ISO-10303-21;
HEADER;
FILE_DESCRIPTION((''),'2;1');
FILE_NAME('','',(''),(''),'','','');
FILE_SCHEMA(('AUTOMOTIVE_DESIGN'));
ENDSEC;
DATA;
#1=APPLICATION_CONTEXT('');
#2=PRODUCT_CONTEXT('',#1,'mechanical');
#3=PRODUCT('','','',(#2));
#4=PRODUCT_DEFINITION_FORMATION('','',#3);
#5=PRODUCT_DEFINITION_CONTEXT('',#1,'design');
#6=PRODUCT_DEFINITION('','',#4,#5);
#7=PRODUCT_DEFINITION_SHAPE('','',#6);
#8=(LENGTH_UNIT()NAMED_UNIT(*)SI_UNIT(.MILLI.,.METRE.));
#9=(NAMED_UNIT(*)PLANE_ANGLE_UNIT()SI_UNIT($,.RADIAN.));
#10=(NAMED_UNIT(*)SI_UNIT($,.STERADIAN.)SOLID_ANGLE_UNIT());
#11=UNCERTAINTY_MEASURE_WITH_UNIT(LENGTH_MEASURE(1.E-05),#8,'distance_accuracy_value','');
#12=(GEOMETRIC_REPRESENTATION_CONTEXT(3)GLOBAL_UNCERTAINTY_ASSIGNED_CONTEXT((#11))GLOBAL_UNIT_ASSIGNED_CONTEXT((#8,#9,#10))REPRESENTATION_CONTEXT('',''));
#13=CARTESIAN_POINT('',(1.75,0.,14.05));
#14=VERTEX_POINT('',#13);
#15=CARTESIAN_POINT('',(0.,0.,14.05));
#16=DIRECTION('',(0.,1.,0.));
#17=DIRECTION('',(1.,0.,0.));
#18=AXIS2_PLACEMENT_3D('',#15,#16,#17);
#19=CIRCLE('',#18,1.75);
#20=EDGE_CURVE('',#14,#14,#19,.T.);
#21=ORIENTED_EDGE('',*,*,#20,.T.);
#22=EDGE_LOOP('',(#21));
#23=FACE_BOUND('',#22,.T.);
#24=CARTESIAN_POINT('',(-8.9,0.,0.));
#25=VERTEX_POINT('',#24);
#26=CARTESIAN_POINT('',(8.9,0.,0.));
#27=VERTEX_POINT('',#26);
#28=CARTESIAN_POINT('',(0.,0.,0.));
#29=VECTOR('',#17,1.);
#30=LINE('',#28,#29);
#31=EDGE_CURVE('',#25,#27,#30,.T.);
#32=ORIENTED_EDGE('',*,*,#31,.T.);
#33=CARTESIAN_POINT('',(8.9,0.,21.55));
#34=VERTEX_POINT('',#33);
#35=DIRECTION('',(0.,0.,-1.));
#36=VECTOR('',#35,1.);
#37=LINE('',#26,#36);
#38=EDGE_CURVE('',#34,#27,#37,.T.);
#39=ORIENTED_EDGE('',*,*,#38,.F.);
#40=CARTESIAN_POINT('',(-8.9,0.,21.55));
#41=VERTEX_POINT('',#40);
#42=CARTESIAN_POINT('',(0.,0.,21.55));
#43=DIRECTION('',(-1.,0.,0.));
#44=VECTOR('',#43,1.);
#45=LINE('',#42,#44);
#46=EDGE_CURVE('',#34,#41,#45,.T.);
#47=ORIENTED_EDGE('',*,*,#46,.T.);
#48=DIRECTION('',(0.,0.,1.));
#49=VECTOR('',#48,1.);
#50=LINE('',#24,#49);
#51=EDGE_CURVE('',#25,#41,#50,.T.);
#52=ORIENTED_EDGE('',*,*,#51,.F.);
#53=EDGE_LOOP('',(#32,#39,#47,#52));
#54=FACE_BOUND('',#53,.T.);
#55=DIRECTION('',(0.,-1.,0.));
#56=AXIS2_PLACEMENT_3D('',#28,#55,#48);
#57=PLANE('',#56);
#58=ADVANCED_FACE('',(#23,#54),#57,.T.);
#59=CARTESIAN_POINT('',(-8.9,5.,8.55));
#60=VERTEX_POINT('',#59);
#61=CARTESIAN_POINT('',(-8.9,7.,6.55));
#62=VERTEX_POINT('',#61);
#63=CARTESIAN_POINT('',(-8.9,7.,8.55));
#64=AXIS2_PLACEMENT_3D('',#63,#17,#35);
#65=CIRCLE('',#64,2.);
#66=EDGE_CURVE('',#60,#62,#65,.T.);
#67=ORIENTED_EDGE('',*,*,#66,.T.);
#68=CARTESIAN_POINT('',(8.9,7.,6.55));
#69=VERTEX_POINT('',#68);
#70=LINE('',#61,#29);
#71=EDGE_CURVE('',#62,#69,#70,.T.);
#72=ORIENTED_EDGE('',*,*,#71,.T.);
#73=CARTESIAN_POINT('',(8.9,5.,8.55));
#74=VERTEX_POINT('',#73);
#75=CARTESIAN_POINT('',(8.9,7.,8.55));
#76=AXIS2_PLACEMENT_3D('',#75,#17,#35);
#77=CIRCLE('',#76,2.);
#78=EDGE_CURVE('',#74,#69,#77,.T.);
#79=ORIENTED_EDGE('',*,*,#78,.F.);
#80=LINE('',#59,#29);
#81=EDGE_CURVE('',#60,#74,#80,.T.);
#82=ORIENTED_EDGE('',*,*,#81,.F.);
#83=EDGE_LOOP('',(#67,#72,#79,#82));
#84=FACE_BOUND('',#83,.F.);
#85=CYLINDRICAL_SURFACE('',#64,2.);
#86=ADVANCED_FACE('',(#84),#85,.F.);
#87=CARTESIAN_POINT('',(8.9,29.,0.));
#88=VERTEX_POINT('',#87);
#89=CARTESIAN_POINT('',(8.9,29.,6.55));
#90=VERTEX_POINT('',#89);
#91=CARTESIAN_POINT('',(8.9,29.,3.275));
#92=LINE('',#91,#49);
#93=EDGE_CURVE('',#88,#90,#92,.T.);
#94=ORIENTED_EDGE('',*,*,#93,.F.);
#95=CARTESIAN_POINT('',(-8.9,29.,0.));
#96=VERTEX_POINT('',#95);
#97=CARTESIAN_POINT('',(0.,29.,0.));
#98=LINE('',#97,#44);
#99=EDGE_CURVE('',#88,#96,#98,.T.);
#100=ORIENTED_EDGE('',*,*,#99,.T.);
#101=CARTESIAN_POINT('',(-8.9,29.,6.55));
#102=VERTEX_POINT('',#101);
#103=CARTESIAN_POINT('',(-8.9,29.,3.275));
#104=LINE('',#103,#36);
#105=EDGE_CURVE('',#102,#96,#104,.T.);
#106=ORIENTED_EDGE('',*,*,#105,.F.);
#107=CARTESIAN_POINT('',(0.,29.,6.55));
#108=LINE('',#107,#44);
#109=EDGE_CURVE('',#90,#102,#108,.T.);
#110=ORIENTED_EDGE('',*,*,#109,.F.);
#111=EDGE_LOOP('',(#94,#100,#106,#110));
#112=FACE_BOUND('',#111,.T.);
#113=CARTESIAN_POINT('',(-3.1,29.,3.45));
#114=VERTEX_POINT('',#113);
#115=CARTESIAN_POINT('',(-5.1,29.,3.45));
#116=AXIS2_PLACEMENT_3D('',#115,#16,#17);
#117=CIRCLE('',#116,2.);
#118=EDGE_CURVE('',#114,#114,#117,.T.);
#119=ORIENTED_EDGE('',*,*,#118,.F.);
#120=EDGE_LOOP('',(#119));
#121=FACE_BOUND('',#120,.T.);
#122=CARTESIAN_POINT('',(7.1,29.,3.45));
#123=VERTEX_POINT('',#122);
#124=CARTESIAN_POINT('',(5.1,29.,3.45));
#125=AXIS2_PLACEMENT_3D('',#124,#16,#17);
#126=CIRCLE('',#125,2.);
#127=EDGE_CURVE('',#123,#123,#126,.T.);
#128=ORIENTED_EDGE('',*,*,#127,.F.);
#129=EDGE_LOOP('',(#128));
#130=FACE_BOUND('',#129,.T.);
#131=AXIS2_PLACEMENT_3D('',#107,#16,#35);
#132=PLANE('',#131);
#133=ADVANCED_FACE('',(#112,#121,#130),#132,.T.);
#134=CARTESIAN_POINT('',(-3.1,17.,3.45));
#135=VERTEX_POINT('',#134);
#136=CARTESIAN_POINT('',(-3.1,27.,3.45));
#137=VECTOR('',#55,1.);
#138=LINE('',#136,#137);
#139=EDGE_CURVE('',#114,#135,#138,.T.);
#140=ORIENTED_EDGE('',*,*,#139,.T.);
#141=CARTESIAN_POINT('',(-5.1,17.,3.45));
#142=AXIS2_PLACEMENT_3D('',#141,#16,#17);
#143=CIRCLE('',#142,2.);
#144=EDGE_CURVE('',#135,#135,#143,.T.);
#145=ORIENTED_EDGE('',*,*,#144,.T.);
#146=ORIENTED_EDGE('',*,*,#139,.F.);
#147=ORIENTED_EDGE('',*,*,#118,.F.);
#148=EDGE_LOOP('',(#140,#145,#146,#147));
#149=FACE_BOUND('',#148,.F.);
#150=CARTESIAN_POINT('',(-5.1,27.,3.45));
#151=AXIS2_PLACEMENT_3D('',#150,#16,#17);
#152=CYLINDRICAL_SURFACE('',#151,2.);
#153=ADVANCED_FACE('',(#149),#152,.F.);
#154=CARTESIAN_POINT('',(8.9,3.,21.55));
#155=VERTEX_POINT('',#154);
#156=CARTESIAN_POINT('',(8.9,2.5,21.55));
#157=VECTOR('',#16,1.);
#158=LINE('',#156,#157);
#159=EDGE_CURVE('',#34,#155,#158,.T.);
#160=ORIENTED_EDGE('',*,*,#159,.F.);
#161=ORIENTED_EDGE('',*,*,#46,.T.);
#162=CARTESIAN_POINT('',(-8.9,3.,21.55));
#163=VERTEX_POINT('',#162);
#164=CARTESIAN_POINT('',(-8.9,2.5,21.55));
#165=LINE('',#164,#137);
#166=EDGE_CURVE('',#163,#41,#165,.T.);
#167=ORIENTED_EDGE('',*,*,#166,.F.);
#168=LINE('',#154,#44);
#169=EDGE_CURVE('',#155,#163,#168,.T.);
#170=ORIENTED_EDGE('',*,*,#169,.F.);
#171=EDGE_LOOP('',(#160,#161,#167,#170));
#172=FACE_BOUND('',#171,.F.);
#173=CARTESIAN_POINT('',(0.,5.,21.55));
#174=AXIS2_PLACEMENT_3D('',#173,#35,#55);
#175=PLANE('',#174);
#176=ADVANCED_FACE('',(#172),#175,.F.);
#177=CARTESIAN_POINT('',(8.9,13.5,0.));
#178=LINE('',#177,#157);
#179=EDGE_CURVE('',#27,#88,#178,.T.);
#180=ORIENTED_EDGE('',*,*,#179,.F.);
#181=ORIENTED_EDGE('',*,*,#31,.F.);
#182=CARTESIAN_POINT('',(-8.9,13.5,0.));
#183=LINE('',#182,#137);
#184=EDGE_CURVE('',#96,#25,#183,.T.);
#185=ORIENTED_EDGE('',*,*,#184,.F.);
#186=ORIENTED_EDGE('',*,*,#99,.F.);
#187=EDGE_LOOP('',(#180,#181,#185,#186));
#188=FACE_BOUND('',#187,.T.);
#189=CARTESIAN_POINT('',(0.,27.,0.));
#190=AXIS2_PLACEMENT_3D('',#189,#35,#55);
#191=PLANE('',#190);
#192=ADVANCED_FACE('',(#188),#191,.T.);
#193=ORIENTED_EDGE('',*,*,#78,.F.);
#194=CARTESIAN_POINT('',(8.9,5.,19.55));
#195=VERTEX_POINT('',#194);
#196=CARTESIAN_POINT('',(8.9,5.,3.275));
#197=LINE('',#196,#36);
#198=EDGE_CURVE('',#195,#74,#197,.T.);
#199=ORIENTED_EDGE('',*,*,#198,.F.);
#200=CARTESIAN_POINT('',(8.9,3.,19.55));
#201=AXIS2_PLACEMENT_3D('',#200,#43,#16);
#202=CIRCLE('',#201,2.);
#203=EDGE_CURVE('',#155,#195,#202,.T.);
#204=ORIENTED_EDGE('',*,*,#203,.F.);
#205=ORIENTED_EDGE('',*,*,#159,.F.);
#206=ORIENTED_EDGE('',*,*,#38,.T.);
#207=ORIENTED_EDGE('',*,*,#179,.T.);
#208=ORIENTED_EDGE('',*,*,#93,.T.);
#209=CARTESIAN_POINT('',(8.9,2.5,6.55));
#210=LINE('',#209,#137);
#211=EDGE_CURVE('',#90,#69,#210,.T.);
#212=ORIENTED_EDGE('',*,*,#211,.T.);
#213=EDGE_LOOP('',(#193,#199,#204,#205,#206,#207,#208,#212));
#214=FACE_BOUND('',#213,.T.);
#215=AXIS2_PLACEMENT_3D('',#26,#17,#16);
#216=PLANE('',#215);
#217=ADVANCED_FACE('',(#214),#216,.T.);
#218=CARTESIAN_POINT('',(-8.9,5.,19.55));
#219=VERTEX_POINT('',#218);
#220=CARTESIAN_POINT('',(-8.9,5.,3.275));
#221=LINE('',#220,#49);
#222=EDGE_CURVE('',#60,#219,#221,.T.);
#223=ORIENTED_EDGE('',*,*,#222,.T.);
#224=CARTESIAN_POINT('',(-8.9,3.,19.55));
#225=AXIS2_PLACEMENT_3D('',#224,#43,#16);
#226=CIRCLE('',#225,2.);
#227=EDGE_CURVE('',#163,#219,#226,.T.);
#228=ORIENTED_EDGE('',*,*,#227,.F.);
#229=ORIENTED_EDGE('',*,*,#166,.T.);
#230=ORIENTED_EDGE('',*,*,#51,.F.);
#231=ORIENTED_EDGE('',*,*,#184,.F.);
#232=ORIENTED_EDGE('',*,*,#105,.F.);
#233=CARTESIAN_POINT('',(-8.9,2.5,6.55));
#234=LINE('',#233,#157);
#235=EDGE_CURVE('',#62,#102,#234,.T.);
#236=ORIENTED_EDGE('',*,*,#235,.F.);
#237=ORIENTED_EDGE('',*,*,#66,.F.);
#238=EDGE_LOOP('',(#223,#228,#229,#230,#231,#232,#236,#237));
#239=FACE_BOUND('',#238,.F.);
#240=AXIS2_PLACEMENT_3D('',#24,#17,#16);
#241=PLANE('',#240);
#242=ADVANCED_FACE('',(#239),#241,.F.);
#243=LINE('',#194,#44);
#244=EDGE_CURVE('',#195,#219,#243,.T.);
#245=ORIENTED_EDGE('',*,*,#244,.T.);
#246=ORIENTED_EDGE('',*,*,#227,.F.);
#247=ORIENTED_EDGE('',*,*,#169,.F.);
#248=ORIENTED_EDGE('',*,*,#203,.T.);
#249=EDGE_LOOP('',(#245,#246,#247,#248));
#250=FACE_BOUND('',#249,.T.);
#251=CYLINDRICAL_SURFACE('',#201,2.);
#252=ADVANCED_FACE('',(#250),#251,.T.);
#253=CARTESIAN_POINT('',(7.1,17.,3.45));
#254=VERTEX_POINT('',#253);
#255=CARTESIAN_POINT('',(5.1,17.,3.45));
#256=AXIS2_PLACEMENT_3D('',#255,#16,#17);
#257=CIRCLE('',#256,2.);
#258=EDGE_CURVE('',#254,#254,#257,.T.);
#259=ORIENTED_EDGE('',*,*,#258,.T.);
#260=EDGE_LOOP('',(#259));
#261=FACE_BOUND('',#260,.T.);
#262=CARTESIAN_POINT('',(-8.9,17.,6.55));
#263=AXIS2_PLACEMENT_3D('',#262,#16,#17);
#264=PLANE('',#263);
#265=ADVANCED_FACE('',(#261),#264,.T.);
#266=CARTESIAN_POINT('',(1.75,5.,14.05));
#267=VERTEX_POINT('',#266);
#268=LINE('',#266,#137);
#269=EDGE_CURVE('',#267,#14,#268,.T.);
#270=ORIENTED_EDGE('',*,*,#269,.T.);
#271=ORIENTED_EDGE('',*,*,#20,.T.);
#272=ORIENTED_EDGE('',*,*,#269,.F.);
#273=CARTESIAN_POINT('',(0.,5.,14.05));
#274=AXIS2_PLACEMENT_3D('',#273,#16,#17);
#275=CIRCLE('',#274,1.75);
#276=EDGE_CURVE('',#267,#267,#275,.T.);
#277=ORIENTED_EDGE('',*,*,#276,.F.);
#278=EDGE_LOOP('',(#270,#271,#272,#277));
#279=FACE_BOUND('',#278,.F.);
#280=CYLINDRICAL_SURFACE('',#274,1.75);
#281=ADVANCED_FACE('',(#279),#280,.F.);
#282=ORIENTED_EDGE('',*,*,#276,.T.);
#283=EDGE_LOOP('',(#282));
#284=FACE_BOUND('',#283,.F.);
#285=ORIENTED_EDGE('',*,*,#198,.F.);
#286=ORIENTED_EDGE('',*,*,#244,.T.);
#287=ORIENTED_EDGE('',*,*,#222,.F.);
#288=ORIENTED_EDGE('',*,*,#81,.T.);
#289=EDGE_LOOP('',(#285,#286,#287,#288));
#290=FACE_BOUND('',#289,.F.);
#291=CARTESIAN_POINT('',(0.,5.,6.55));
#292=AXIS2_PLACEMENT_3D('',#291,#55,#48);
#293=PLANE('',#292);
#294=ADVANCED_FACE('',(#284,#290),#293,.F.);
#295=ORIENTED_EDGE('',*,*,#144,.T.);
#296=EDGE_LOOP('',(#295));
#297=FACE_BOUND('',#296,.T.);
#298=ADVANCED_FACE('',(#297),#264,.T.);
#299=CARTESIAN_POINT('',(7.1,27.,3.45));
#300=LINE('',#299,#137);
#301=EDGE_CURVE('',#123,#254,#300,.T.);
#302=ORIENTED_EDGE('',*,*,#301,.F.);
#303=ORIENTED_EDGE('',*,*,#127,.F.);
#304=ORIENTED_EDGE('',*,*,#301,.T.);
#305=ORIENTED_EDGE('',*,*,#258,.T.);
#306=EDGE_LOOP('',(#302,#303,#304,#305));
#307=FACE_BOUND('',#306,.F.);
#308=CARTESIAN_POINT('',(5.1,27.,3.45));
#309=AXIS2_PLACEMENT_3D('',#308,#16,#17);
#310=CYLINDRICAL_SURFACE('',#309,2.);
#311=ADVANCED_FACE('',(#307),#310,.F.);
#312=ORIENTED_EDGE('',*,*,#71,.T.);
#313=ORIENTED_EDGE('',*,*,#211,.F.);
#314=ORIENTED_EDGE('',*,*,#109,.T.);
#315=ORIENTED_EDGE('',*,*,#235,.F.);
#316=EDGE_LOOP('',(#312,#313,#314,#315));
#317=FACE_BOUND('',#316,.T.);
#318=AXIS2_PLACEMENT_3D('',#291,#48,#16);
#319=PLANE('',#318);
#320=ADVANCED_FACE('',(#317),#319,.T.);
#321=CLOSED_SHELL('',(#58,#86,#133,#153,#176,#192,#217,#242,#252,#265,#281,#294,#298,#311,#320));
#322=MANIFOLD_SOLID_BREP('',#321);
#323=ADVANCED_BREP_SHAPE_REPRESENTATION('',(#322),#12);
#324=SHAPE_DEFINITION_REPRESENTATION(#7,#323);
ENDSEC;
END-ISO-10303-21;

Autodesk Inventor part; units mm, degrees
ref_plane "YZ Plane" through (0, 0, 0) normal (1, 0, 0) x (0, 1, 0)
ref_plane "XZ Plane" through (0, 0, 0) normal (0, 1, 0) x (-1, 0, 0)
ref_plane "XY Plane" through (0, 0, 0) normal (0, 0, 1) x (1, 0, 0)
sketch "Boceto1" plane through (0, 0, 0) normal (1, 0, 0) x (0, 1, 0)
  line L0 (27, 0) -> (0, 0)
  line L1 (0, 0) -> (0, 6.55)
  line L2 (0, 6.55) -> (27, 6.55)
  line L3 (27, 6.55) -> (27, 0)
  line L4 (0, 6.55) -> (5, 6.55)
  line L5 (5, 6.55) -> (5, 21.55)
  line L6 (5, 21.55) -> (0, 21.55)
  line L7 (0, 21.55) -> (0, 6.55)
  dimension "d0" = 27
  dimension "d1" = 6.55
  dimension "d2" = 15
  dimension "d3" = 5
extrude "Extrusión1" add sketch "Boceto1" along normal mid plane 17.8
sketch "Boceto4" plane through (-8.9, 5, 21.55) normal (0, 1, 0) x (1, 0, 0)
  point P0 (8.9, 21.55)
sketch "Boceto5" plane through (-8.9, 27, 6.55) normal (0, 1, 0) x (1, 0, 0)
  circle A0 centre (3.8, 3.1) radius 2
  circle A1 centre (14, 3.1) radius 2
  line L0 (0, 0) -> (17.8, 0) projected
  line L1 (0, 0) -> (0, 6.55) projected
  line L2 (17.8, 6.55) -> (17.8, 0) projected
  point P0 (8.9, 6.55)
  dimension "d10" = 4
  dimension "d11" = 4
  dimension "d12" = 3.1
  dimension "d13" = 3.8
  dimension "d14" = 3.8
extrude "Extrusión3" cut sketch "Boceto5" against normal blind 10
sketch "Boceto6" plane through (-8.9, 5, 21.55) normal (0, 1, 0) x (1, 0, 0)
  circle A0 centre (8.9, 7.5) radius 1.75
  line L0 (0, 0) -> (0, 15) projected
  line L1 (0, 0) -> (17.8, 0) projected
  point P0 (8.9, 21.55)
  point P1 (0, 7.5)
  point P2 (8.9, 0)
  dimension "d17" = 3.5
extrude "Extrusión4" cut sketch "Boceto6" against normal blind 10
fillet "Empalme1" radius 2 1 edges at (0, 5, 6.55)
fillet "Empalme2" radius 2 1 edges at (0, 5, 21.55)
move faces "Desplazar1" translate (0, 2, 0) faces at (1.6196, 27, 0.4882)
equation "\"d11\" = d10"
equation "\"d14\" = d13"
properties part number "Sujeción de servo a mesa s-c" material "Plástico PC/ABS"
